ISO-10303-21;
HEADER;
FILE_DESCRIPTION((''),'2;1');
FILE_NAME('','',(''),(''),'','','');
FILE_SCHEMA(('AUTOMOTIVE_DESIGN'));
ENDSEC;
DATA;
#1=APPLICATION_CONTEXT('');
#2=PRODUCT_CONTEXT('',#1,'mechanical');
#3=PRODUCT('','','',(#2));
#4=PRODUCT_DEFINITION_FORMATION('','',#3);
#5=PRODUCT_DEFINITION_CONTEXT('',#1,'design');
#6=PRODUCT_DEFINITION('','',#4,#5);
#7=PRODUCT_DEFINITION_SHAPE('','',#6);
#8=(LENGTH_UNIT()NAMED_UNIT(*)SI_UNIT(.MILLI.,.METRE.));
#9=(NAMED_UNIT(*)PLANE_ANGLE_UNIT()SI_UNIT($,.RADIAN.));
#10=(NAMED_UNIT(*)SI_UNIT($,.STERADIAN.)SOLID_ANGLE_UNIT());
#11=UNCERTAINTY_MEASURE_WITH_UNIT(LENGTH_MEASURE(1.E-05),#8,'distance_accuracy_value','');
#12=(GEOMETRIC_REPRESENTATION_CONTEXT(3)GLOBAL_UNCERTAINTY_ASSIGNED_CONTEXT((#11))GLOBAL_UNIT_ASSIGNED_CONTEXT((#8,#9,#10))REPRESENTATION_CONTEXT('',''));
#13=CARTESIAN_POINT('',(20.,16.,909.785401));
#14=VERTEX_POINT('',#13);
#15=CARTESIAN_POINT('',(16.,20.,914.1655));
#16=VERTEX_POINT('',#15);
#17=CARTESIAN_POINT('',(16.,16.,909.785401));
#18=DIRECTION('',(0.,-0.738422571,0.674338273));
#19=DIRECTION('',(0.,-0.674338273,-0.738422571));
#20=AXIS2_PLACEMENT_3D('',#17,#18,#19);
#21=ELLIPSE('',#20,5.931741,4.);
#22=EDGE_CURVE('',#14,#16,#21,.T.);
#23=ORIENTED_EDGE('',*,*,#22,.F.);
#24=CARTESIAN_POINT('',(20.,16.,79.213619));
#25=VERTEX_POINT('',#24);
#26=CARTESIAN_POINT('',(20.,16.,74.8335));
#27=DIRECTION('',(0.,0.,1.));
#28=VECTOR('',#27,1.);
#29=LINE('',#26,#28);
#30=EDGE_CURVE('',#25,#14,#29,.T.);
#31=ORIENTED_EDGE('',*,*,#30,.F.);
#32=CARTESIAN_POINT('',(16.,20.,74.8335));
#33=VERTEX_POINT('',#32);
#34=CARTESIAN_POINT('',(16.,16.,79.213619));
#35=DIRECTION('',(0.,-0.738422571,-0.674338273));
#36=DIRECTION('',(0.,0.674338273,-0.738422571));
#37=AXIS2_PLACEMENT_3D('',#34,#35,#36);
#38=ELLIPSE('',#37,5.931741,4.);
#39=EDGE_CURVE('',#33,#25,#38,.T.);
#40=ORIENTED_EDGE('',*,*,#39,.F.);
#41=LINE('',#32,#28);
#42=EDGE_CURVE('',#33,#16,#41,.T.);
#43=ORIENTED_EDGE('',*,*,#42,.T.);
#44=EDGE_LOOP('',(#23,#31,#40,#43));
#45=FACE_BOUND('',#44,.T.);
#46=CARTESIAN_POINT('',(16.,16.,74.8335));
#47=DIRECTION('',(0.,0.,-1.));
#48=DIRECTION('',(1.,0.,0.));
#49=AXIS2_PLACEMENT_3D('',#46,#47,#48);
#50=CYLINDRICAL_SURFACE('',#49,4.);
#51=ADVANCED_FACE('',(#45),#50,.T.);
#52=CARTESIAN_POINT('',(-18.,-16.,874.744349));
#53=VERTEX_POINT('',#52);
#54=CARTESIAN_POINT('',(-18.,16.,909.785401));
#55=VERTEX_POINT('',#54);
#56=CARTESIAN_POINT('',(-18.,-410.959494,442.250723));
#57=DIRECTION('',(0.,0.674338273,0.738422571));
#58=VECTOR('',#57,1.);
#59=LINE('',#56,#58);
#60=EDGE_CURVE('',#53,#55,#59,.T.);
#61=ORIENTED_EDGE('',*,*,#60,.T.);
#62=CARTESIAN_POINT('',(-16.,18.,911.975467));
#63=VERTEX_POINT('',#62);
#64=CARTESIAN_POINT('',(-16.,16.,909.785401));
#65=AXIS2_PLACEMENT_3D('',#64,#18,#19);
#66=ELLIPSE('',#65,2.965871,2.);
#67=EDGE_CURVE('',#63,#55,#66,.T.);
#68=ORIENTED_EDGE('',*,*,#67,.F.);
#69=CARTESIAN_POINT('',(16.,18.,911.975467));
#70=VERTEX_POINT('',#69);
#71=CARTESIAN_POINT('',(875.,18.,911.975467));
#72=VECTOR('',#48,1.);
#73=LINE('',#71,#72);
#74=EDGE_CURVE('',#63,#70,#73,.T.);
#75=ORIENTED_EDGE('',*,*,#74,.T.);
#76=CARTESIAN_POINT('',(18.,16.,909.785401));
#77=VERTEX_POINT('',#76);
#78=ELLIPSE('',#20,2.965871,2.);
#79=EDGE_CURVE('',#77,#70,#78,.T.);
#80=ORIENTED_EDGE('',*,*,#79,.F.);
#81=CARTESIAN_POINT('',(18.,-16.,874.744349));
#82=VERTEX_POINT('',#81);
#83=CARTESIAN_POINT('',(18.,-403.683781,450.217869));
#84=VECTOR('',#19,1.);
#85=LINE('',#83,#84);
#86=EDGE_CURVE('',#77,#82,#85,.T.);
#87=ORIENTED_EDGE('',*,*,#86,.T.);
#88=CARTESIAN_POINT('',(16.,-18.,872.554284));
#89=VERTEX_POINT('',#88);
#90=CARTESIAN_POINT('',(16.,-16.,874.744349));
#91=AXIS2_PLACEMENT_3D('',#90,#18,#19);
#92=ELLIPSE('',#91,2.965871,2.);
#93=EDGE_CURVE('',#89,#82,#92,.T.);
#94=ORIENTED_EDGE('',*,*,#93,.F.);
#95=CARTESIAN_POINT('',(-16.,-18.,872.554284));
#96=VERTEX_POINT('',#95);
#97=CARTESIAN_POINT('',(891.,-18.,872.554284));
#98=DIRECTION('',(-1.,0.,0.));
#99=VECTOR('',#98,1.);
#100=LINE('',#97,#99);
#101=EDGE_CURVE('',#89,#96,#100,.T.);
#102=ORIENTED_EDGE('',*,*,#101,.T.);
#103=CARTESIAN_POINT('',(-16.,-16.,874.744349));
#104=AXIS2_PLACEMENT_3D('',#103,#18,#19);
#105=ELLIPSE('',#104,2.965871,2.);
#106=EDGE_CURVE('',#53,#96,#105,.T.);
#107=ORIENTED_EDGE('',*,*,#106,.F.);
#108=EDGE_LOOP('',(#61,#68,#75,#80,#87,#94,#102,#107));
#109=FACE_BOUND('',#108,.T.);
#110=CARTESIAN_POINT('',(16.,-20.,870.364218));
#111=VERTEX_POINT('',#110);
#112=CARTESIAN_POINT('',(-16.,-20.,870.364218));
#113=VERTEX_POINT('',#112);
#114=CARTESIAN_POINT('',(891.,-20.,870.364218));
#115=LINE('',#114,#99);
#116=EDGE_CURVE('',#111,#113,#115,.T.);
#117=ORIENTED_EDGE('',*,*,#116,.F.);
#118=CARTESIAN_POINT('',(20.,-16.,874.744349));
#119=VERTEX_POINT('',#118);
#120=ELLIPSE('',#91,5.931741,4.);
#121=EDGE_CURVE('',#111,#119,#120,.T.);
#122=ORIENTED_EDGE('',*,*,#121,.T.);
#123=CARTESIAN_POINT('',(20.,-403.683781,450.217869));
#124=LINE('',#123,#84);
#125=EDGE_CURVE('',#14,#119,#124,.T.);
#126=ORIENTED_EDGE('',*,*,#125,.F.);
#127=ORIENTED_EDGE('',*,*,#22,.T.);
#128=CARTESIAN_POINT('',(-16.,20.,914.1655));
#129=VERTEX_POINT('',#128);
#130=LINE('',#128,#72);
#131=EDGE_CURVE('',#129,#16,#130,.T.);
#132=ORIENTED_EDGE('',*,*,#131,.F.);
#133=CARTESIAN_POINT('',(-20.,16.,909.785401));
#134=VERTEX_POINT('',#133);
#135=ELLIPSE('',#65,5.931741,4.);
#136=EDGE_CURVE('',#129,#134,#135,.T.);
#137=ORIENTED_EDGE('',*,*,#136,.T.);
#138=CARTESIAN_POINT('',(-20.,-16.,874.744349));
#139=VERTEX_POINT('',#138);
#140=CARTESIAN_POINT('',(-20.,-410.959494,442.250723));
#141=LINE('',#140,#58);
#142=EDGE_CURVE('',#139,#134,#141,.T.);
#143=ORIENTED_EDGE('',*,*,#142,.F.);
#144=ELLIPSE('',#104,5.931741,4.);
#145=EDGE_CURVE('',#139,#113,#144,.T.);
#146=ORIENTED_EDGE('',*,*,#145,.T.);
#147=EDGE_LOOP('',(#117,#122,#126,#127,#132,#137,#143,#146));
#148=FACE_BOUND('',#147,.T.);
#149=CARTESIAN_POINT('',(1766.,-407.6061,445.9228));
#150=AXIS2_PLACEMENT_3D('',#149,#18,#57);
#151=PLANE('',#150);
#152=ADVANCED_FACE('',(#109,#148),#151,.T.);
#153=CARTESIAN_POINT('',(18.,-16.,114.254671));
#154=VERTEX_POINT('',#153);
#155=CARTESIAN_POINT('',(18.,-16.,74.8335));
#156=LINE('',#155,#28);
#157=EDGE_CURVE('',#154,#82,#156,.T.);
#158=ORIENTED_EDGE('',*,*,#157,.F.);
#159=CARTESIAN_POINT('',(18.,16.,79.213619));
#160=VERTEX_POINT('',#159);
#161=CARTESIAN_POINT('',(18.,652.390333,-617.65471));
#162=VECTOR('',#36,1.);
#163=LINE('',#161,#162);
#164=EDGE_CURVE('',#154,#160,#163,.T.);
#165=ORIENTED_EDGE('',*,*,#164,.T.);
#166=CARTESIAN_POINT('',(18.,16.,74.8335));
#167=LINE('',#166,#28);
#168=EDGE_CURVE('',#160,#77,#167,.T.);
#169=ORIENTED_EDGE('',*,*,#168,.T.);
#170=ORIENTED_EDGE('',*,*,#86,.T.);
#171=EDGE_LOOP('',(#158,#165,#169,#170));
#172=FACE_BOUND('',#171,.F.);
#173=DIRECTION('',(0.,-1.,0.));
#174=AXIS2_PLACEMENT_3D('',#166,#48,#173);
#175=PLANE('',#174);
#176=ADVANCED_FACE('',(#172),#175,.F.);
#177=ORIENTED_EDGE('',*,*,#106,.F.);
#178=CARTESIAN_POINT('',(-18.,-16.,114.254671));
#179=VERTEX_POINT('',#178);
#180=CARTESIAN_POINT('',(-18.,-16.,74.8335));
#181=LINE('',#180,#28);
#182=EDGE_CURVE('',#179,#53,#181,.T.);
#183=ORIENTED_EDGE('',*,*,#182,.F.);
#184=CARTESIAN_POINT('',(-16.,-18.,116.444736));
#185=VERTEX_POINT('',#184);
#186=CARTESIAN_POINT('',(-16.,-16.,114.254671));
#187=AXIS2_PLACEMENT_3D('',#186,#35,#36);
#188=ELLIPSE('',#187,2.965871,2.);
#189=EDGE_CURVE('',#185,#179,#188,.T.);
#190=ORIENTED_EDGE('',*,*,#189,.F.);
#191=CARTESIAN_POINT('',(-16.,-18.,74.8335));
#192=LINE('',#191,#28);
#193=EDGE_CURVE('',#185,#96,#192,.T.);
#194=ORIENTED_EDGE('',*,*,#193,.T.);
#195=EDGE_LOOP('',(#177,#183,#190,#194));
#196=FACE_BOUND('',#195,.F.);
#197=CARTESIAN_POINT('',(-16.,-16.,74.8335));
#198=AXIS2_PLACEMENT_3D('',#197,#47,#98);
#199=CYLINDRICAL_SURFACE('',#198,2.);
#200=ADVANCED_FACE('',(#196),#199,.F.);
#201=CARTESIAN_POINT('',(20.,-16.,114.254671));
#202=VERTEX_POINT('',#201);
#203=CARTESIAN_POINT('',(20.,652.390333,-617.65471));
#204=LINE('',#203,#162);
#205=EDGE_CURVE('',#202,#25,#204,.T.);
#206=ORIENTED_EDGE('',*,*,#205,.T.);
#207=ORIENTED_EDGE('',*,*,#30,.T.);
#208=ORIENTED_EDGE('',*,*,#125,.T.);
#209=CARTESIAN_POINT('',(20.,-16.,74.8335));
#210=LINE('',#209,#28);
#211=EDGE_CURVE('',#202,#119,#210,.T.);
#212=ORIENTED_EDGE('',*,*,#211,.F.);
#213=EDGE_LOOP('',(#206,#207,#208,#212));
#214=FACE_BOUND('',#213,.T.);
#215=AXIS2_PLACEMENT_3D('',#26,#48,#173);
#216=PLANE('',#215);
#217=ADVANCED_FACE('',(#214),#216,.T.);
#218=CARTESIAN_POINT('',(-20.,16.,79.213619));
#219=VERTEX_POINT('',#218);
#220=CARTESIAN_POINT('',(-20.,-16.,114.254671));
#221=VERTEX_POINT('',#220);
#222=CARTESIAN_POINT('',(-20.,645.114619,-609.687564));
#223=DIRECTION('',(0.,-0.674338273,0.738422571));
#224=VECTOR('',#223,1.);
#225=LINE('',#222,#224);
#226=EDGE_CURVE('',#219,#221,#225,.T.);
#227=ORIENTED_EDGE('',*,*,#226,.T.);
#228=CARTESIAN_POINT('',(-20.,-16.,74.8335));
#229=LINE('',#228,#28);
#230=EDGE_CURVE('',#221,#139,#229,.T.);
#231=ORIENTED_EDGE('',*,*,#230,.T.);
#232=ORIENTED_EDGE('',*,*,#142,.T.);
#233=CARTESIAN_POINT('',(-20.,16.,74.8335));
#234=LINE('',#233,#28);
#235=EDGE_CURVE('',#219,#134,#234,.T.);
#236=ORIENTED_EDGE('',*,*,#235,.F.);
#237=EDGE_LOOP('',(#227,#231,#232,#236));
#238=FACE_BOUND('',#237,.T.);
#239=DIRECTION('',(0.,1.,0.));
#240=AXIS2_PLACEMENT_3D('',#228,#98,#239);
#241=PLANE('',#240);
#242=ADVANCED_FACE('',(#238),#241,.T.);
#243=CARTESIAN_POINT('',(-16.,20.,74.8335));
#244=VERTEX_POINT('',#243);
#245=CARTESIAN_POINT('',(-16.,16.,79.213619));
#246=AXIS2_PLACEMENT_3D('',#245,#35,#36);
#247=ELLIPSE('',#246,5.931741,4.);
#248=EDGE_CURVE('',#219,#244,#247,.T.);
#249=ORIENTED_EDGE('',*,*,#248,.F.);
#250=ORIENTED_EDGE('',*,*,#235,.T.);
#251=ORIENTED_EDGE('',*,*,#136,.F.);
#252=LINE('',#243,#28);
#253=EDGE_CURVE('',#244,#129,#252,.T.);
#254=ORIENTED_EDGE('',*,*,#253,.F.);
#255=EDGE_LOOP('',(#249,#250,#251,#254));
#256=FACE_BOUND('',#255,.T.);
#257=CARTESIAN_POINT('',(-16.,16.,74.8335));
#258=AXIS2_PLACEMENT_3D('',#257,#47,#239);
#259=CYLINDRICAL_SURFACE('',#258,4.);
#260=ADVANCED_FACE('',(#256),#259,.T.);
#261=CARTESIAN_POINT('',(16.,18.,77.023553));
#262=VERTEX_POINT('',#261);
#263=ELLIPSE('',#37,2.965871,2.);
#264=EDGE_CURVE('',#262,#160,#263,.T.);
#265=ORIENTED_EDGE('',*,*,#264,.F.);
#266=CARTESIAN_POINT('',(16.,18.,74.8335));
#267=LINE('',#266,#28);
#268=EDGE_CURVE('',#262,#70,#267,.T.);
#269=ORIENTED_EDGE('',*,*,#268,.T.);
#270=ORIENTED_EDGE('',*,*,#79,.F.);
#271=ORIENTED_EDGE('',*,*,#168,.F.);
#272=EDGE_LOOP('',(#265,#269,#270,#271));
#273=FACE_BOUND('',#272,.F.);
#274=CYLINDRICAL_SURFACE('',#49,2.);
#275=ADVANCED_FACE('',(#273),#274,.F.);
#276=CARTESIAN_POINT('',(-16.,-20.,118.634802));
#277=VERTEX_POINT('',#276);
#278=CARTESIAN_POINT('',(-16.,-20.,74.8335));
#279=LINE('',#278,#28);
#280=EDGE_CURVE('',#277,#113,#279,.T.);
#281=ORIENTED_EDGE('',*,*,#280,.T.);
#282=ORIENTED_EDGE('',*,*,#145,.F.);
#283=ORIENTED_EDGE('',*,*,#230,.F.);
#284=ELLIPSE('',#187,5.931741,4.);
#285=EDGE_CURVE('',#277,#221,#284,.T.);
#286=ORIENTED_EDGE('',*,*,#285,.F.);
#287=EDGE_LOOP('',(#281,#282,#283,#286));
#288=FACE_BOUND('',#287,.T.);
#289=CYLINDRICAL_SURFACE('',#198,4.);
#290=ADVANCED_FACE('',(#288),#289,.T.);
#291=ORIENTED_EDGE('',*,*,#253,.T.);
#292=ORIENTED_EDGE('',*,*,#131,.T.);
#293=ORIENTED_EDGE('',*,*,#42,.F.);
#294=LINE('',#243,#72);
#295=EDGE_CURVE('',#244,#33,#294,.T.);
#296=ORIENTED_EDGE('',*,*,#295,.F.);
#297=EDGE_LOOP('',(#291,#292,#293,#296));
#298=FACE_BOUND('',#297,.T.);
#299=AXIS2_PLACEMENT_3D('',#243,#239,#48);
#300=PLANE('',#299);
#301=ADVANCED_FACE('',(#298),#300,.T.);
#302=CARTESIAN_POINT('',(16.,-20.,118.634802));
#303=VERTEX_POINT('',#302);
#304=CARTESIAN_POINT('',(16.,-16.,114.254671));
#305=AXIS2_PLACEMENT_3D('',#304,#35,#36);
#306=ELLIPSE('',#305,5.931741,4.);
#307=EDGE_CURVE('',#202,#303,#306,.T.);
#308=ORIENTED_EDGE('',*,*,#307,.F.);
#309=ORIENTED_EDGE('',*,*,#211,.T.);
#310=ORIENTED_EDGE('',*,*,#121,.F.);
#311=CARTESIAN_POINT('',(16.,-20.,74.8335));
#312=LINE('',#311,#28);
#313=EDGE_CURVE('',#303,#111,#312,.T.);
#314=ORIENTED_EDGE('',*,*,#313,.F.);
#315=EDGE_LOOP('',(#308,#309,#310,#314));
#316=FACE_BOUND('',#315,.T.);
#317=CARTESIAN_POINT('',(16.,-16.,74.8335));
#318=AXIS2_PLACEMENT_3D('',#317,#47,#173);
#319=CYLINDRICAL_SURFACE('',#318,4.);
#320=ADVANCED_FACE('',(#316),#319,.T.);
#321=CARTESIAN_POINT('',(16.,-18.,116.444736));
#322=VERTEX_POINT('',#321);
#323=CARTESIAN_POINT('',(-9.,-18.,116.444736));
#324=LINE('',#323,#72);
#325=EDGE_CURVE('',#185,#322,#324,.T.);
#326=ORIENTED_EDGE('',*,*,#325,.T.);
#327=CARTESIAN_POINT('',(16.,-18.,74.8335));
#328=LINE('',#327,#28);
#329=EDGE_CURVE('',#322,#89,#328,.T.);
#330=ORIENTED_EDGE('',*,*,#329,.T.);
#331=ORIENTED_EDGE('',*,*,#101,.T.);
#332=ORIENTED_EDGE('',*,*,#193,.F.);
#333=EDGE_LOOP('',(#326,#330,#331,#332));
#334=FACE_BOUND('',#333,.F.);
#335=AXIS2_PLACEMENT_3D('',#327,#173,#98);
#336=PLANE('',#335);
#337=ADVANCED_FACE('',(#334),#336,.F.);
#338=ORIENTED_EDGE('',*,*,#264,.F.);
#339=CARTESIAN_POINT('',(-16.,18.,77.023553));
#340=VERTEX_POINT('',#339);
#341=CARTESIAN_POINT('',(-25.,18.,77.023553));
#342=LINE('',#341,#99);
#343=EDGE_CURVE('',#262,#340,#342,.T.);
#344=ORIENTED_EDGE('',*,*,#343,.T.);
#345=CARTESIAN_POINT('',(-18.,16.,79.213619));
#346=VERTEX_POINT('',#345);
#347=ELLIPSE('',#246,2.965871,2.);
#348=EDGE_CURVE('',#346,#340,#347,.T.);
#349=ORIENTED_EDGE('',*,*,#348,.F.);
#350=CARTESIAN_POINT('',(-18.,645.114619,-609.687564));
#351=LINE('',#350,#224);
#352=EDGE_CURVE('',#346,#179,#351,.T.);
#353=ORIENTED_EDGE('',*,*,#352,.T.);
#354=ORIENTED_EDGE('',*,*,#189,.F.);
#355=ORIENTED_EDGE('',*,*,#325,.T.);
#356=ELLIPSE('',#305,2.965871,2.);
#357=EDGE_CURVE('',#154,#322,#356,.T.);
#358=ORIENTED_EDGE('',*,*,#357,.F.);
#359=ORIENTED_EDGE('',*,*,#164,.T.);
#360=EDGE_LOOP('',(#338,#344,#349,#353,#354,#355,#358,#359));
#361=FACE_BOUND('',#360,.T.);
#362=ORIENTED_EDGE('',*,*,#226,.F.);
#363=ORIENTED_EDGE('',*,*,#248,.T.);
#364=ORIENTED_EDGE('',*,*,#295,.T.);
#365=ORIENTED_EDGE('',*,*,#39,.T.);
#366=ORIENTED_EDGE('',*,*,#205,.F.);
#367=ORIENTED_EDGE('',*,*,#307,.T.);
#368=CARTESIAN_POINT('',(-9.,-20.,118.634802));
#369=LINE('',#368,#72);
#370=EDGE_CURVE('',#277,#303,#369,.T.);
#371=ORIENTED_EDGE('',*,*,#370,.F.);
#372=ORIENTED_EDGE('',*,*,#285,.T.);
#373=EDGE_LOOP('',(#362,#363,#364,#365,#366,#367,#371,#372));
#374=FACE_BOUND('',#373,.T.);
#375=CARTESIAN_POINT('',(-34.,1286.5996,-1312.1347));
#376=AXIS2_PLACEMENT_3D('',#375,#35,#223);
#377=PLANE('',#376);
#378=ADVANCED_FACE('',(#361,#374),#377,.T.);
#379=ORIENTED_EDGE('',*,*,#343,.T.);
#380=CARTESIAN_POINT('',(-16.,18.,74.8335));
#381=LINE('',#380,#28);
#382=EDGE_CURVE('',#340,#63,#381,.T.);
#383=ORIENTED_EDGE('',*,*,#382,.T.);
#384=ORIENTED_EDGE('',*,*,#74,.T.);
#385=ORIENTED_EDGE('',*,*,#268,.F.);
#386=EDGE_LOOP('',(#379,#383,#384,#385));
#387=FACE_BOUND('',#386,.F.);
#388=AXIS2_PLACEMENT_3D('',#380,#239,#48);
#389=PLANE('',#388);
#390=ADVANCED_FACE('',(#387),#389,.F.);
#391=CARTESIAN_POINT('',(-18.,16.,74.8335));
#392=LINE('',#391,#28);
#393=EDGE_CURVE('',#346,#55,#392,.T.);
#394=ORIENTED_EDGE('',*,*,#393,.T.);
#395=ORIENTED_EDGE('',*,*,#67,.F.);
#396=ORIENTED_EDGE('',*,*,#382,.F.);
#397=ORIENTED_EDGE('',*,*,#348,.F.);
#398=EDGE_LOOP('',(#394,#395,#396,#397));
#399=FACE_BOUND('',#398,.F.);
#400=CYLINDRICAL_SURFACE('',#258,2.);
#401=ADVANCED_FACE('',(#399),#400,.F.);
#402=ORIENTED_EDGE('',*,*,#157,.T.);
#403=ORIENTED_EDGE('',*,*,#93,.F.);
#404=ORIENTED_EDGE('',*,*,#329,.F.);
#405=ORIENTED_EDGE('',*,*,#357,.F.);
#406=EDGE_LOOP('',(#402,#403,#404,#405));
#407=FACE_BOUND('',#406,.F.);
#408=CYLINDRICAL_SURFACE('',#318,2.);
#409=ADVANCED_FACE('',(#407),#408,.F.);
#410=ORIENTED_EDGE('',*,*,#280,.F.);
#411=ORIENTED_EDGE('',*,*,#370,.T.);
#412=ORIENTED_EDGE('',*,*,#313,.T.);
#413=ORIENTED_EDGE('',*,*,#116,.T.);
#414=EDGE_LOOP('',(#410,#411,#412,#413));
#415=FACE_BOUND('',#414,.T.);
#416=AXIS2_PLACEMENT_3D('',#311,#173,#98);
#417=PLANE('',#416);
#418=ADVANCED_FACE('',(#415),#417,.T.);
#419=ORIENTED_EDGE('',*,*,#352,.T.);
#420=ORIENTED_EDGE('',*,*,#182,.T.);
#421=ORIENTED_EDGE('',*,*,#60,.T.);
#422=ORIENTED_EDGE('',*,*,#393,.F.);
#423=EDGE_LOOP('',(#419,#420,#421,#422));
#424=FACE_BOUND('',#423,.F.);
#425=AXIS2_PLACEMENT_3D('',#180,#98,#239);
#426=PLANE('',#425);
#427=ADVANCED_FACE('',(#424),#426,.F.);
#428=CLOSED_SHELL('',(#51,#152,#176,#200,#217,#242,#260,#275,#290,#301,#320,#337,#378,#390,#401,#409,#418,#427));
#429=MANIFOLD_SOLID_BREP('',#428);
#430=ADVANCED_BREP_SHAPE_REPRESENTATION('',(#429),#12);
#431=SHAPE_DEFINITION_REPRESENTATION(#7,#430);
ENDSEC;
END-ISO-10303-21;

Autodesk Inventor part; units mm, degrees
ref_plane "Start Plane" through (0, 0, 74.8335) normal (0, 0, 1) x (1, 0, 0)
ref_plane "End Plane" through (0, 0, 914.1655) normal (0, 0, 1) x (1, 0, 0)
sketch "Sketch" plane through (0, 0, 0) normal (0, 0, 1) x (1, 0, 0)
  line L0 (-20, -16) -> (-20, 16)
  line L1 (-16, 20) -> (16, 20)
  line L2 (20, 16) -> (20, -16)
  line L3 (16, -20) -> (-16, -20)
  arc A0 (-20, -16) -> (-16, -20) centre (-16, -16) ccw
  arc A1 (20, 16) -> (16, 20) centre (16, 16) ccw
  arc A2 (-16, 20) -> (-20, 16) centre (-16, 16) ccw
  arc A3 (16, -20) -> (20, -16) centre (16, -16) ccw
  arc A4 (-16, 18) -> (-18, 16) centre (-16, 16) ccw
  line L4 (-16, 18) -> (16, 18)
  arc A5 (18, 16) -> (16, 18) centre (16, 16) ccw
  line L5 (18, 16) -> (18, -16)
  arc A6 (16, -18) -> (18, -16) centre (16, -16) ccw
  line L6 (16, -18) -> (-16, -18)
  arc A7 (-18, -16) -> (-16, -18) centre (-16, -16) ccw
  line L7 (-18, -16) -> (-18, 16)
  line L8 (0, 29.1598) -> (0, -29.1598) construction
  line L9 (-29.1598, 0) -> (29.1598, 0) construction
  dimension "d7" = 4
  dimension "d9" = 40
  dimension "d11" = 40
  dimension "d12" = 2
  dimension "d15" = 20
  dimension "d16" = 20
extrude "Body" add sketch "Sketch" along normal up to surface (839.332 mm away) from surface at 74.8335
sketch "Sketch3" plane through (0, 0, 0) normal (0, 0, 1) x (1, 0, 0)
  line L0 (0, 0) -> (10, 0)
ref_plane "Work Plane3" through (0, 0, 0) normal (0, -1, 0) x (1, 0, 0)
ref_plane "Work Plane4" through (1766, -407.6061, 445.9228) normal (0, -0.7384226, 0.6743383) x (1, 0, 0)
split "Split1" plane through (1766, -407.6061, 445.9228) removes the side toward (0, -0.7384226, 0.6743383)
ref_plane "Work Plane5" through (-34, 1286.5996, -1312.1347) normal (0, -0.7384226, -0.6743383) x (1, 0, 0)
split "Split2" plane through (-34, 1286.5996, -1312.1347) removes the side toward (0, -0.7384226, -0.6743383)
sketch "Sketch4" plane through (0, 0, 0) normal (0, -1, 0) x (1, 0, 0)
  line L0 (-2, 74.8335) -> (12, 74.8335) projected
  line L1 (-2, 914.1655) -> (12, 914.1655) projected
  dimension "d18" = 839.332
equation "\"d7\" = G_IR"
equation "\"d9\" = G_W"
equation "\"d11\" = G_H"
equation "\"d12\" = G_T"
equation "\"d15\" = 0.5 * d9"
equation "\"d16\" = 0.5 * d11"
equation "\"d3\" = G_L"
equation "\"G_W\" = 40"
equation "\"G_H\" = 40"
equation "\"G_T\" = 2"
equation "\"G_IR\" = 4"
equation "\"G_L\" = d18"
equation "\"G_OFFSET_START\" = -74.83351"
equation "\"G_OFFSET_END\" = -193.46832"
equation "\"d13\" = -G_OFFSET_START"
equation "\"d14\" = G_OFFSET_END + B_L"
equation "\"B_L\" = 1107.63384"
properties part number "ISO 10799-2 - 40x40x2 - 839,33" material "Steel, Mild"
